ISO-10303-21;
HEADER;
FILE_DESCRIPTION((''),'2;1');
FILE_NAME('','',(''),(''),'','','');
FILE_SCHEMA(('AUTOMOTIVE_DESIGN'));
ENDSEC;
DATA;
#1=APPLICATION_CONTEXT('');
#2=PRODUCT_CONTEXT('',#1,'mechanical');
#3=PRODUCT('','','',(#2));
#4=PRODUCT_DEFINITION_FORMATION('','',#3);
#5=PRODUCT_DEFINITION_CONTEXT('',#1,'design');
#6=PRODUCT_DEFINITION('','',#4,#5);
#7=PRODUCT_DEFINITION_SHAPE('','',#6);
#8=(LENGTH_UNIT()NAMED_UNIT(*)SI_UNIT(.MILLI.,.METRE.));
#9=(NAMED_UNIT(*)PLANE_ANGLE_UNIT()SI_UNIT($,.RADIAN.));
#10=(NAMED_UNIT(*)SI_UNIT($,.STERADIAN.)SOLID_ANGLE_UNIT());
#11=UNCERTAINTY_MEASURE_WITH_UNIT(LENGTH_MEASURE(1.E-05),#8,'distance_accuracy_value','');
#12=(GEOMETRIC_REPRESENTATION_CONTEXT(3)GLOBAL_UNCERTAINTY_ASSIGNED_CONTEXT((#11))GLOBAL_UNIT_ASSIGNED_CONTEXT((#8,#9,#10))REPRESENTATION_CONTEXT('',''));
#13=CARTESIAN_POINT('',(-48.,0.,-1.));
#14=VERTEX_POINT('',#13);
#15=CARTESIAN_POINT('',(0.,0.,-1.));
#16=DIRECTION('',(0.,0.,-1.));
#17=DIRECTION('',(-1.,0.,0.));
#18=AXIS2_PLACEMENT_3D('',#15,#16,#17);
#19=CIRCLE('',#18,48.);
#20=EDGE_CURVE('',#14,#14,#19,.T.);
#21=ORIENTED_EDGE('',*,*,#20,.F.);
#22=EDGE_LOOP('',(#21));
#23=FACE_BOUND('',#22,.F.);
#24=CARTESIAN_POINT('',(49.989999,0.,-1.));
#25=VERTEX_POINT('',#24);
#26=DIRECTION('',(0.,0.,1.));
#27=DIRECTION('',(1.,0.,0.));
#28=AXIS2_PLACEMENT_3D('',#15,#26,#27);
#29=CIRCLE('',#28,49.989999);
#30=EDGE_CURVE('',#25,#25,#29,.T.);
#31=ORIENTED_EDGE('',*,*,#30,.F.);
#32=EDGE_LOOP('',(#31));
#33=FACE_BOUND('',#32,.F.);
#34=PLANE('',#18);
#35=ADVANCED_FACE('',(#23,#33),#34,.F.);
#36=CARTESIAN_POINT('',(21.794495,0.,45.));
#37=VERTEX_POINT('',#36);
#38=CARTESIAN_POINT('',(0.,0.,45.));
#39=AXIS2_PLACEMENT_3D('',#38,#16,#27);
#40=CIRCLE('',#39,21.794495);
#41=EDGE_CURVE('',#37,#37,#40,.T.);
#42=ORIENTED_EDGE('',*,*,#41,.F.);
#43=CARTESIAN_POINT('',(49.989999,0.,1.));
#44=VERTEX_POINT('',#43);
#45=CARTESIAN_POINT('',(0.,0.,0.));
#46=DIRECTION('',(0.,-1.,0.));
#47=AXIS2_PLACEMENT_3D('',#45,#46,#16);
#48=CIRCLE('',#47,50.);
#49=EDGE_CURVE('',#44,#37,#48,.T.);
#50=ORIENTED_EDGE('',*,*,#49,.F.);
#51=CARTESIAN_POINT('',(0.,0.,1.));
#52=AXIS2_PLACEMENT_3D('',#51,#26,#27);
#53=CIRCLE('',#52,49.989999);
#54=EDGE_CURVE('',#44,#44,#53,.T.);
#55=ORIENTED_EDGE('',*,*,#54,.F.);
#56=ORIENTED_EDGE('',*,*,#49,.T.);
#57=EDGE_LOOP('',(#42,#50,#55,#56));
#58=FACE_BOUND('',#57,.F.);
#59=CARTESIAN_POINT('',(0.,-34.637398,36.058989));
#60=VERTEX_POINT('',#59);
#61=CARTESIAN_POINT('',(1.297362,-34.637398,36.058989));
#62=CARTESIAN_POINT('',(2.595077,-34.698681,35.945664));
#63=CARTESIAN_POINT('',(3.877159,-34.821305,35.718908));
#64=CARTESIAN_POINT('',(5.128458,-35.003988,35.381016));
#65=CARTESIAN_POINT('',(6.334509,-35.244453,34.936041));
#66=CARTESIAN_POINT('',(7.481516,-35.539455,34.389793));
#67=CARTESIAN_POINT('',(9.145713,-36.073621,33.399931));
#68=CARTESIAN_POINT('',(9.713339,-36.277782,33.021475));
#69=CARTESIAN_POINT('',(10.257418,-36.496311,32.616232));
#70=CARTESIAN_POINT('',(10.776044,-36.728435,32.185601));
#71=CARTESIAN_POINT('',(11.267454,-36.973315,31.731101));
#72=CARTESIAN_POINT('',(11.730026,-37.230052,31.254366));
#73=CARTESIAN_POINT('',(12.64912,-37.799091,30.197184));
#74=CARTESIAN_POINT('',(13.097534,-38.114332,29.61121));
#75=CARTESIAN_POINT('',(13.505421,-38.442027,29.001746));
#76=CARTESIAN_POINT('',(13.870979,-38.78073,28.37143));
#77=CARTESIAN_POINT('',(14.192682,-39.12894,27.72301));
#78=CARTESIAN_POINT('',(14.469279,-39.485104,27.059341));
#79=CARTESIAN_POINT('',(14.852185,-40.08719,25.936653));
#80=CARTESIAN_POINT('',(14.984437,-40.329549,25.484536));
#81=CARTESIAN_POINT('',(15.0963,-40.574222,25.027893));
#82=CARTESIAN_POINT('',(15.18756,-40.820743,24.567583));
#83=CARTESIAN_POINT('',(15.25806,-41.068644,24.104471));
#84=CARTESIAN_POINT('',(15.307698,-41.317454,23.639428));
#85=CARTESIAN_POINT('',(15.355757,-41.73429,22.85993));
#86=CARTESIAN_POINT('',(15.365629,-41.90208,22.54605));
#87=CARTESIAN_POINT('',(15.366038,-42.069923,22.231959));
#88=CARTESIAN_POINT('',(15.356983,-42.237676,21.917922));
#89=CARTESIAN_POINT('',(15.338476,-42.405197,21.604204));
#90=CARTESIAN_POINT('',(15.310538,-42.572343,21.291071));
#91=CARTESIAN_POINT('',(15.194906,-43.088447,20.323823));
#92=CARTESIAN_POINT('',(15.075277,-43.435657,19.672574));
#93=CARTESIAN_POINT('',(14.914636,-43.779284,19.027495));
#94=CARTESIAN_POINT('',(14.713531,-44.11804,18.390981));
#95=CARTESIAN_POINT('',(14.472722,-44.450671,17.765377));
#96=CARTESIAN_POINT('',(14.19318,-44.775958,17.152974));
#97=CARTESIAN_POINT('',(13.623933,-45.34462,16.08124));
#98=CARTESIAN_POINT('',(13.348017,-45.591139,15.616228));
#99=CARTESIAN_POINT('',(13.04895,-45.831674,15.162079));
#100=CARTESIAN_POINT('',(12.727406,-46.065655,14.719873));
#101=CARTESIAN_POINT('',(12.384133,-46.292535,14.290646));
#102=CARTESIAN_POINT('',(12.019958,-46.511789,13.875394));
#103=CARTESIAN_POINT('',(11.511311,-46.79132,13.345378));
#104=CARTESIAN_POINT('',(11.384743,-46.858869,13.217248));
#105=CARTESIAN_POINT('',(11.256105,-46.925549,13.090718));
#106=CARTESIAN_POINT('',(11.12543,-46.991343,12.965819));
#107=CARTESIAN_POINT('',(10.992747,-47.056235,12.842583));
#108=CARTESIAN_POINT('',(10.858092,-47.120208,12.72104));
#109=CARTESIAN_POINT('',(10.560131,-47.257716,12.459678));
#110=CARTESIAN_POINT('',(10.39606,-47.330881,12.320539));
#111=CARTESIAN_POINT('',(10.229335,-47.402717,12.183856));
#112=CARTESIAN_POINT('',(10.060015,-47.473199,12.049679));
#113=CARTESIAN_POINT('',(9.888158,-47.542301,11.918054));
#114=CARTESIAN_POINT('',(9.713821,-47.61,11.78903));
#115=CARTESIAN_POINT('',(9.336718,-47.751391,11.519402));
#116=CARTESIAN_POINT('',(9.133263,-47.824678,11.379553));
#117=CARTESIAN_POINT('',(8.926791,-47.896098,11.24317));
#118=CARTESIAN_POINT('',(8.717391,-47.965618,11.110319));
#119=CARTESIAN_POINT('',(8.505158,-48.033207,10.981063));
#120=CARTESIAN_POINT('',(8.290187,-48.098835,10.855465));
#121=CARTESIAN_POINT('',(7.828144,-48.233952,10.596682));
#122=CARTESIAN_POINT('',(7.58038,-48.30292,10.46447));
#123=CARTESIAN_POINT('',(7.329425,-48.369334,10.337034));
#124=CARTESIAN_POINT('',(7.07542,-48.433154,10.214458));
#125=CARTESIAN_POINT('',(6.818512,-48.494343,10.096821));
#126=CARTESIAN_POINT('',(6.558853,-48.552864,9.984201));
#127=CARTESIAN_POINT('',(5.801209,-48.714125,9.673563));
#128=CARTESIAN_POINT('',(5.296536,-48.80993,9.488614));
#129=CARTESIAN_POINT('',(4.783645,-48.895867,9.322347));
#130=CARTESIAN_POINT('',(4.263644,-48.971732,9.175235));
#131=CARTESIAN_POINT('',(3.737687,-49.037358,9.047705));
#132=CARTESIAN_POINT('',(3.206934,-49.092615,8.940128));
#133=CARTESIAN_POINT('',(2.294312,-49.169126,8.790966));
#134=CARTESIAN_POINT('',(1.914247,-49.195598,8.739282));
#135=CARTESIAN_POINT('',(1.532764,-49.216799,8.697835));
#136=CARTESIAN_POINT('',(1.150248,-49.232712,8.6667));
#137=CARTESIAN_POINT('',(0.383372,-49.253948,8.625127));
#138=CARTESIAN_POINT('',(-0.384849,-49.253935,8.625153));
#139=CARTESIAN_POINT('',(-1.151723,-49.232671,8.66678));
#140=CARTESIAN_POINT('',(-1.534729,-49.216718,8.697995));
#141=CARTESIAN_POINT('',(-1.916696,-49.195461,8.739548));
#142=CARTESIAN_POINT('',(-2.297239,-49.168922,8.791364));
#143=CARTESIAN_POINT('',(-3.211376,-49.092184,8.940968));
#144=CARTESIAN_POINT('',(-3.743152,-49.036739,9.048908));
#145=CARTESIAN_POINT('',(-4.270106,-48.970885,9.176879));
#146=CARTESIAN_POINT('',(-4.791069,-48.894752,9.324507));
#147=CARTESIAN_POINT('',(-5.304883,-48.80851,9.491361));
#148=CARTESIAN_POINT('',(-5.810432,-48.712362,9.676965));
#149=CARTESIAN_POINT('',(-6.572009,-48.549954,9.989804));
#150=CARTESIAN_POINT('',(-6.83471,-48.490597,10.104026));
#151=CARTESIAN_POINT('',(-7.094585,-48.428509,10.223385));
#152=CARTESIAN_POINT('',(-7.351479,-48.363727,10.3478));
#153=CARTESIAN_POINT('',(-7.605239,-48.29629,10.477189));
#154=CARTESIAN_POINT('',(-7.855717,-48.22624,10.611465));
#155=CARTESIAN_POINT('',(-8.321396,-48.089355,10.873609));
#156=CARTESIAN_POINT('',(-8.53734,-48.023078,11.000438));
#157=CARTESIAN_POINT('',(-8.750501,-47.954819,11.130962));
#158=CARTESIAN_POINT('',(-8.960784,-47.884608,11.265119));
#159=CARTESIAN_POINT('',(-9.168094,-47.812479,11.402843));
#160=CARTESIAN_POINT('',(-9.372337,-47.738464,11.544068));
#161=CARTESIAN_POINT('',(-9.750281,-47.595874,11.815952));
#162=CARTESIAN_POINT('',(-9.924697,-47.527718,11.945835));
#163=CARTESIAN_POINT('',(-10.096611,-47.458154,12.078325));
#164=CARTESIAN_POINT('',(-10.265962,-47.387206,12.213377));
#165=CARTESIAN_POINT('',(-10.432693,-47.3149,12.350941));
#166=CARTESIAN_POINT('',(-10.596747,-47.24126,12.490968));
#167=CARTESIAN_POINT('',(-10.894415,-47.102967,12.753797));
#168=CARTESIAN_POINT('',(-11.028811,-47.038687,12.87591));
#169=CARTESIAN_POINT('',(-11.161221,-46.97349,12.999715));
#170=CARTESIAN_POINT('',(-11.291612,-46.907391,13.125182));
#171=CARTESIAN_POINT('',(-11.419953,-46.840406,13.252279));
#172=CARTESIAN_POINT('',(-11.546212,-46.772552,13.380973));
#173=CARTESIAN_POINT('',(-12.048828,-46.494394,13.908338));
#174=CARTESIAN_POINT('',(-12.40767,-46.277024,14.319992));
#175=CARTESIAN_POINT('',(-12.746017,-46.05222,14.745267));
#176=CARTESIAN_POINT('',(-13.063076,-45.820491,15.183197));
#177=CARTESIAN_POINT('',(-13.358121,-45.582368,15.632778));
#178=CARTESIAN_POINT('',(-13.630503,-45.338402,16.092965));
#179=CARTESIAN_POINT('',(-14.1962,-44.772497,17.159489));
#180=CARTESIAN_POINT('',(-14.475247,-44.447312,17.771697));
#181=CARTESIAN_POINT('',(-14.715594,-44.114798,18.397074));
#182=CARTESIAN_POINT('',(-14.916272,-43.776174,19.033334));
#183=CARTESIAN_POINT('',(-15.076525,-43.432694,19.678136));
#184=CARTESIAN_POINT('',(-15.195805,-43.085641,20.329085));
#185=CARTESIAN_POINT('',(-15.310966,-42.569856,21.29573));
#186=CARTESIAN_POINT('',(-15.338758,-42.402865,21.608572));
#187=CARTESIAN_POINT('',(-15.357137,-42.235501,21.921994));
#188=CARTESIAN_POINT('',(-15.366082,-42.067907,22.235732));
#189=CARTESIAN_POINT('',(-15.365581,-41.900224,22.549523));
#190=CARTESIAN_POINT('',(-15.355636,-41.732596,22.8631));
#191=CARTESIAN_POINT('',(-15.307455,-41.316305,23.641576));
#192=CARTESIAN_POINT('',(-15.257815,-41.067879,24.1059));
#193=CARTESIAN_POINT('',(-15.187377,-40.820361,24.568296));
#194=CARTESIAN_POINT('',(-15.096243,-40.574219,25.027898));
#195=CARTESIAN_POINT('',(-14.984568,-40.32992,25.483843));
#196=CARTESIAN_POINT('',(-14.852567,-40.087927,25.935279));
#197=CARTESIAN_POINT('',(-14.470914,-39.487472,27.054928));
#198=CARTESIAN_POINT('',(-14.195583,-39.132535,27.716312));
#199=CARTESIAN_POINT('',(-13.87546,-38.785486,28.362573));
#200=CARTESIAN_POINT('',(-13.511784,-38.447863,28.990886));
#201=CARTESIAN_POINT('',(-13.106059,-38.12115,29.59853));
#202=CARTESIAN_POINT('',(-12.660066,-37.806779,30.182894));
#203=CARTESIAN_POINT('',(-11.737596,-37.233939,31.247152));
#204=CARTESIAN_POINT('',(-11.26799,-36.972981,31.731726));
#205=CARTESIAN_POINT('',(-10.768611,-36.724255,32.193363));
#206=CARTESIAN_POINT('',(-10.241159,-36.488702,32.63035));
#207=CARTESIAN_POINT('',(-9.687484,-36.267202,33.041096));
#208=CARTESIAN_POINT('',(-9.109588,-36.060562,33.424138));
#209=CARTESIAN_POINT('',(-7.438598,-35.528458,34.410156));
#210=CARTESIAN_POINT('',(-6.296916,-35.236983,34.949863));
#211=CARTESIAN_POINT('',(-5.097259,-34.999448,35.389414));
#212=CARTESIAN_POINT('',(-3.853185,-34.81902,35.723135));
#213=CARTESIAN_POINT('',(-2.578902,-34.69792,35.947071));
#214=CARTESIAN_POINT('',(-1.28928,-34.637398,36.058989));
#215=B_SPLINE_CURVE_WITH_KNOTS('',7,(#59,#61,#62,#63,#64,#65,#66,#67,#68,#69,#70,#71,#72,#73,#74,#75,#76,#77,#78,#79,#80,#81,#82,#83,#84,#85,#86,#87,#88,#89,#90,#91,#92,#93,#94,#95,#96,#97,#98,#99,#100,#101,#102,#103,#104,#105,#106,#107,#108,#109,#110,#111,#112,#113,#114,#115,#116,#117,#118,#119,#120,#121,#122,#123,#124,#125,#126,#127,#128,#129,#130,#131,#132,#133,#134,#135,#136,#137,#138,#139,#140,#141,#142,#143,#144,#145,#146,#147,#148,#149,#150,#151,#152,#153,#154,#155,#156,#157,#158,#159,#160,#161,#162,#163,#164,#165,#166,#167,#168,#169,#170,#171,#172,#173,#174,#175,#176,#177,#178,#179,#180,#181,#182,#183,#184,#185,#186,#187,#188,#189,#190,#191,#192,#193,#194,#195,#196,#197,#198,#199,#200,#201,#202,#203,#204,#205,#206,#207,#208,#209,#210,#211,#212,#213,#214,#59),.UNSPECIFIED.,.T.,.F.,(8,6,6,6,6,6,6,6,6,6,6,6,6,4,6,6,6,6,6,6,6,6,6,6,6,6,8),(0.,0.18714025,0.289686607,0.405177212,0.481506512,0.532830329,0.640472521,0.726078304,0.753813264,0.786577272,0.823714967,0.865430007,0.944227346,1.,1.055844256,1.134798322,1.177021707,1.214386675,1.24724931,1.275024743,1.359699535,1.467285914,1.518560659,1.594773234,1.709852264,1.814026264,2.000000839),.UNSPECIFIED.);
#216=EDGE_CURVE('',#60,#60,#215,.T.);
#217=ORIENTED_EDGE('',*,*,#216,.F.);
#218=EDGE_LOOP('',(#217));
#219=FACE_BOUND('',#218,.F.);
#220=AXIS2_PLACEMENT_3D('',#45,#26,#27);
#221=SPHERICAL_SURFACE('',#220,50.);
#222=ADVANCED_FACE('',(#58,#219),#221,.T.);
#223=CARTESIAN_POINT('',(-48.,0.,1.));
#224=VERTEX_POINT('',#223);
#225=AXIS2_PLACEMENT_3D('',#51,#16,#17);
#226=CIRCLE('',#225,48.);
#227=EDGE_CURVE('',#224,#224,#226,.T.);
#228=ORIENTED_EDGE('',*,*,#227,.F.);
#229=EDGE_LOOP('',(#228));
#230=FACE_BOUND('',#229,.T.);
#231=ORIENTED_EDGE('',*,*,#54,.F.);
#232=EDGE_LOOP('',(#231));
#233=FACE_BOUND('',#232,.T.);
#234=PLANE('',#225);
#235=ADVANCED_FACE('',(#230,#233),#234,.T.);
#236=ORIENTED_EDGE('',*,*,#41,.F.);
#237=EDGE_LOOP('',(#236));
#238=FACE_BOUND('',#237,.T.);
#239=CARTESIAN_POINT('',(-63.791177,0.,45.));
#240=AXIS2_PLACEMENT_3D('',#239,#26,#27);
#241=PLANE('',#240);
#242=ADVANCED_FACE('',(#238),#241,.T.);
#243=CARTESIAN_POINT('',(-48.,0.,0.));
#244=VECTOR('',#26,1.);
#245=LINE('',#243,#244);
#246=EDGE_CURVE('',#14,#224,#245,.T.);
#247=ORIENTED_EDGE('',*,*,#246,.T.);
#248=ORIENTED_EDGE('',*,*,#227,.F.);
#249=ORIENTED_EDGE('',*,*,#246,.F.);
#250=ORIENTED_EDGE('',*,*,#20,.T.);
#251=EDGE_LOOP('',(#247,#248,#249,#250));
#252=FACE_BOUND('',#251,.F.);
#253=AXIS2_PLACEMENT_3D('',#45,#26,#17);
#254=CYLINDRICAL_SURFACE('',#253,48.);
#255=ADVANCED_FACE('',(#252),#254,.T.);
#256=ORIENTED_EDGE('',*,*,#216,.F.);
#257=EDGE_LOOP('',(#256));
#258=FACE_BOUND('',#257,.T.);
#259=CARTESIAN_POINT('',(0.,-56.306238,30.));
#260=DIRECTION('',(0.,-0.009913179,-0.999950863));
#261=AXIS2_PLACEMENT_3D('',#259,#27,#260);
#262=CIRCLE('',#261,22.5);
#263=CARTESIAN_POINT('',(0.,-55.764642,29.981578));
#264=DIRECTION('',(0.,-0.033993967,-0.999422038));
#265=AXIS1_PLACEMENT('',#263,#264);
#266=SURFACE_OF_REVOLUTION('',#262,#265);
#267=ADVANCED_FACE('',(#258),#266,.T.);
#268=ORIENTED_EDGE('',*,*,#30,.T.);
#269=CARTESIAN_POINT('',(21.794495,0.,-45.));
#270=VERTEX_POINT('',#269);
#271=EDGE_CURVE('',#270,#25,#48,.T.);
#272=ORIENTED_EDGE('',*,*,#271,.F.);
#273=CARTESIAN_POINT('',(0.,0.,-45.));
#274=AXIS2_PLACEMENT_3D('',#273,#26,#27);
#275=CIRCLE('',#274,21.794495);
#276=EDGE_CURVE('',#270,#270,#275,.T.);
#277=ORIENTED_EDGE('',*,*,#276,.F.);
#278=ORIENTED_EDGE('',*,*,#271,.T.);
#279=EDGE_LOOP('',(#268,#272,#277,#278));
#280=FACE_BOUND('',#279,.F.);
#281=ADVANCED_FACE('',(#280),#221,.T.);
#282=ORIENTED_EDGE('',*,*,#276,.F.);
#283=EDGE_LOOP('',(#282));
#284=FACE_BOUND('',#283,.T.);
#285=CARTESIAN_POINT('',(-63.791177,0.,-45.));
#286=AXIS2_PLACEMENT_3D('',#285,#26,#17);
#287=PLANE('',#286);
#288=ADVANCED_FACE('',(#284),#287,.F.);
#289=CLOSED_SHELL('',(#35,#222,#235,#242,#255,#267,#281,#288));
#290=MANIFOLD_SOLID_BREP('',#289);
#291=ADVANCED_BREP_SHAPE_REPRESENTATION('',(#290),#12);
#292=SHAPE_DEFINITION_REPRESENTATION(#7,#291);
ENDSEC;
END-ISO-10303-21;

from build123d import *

# Parameters (mm, degrees)
F4_W          = 126.554620702
F4_H          = 16.890758596
F5_DEPTH      = 25
F5_DEPTH_BACK = 25
F6_W          = 22.8272504394
F6_H          = 2


# Not quite as in the source:
# - a pattern or mirror of a feature is missing from the dataset's text; its kind, count and spacing are read off the source's solid


with BuildPart() as f1:
    # F0 (on Front) → F1 (revolve)
    with BuildSketch(Plane.XZ):
        with BuildLine():
            Line((0, 50), (0, -50))
            ThreePointArc((0, -50), (50, 0), (0, 50))
        make_face()
    revolve(axis=Axis((0, 0, 0), (0, 0, -1)))

    # F2 (on Right) → F3 (revolve, cut)
    with BuildSketch(Plane.YZ):
        with BuildLine():
            Line((-55, 52.4620511452), (-56.5292847679, 7.5011055772))
            ThreePointArc((-56.5292847679, 7.5011055772), (-33.8192423865, 29.2351357427), (-55, 52.4620511452))
        make_face()
    revolve(axis=Axis((0, -55.7646423839, 29.9815783612), (0, -0.033993967, -0.9994220381)), mode=Mode.SUBTRACT)

    # F4 (on Front) → F5 (cut, two sides)
    with BuildSketch(Plane.XZ) as f5_sk:
        with Locations((-0.5138665438, 53.445379298)):
            Rectangle(F4_W, F4_H)
    f5 = extrude(amount=-F5_DEPTH, mode=Mode.SUBTRACT) + extrude(f5_sk.sketch, amount=F5_DEPTH_BACK, mode=Mode.SUBTRACT)

    # F5_copies: F5 across plane
    add(f5.mirror(Plane(origin=(0, 0, 0), x_dir=(-1, 0, 0), z_dir=(0, 0, -1))), mode=Mode.SUBTRACT)

    # F6 (on Front) → F7 (revolve, cut)
    with BuildSketch(Plane.XZ):
        with Locations((-59.4136252197, 0)):
            Rectangle(F6_W, F6_H)
    revolve(axis=Axis((0, 0, 0), (0, 0, -1)), mode=Mode.SUBTRACT)


solid = f1.part
